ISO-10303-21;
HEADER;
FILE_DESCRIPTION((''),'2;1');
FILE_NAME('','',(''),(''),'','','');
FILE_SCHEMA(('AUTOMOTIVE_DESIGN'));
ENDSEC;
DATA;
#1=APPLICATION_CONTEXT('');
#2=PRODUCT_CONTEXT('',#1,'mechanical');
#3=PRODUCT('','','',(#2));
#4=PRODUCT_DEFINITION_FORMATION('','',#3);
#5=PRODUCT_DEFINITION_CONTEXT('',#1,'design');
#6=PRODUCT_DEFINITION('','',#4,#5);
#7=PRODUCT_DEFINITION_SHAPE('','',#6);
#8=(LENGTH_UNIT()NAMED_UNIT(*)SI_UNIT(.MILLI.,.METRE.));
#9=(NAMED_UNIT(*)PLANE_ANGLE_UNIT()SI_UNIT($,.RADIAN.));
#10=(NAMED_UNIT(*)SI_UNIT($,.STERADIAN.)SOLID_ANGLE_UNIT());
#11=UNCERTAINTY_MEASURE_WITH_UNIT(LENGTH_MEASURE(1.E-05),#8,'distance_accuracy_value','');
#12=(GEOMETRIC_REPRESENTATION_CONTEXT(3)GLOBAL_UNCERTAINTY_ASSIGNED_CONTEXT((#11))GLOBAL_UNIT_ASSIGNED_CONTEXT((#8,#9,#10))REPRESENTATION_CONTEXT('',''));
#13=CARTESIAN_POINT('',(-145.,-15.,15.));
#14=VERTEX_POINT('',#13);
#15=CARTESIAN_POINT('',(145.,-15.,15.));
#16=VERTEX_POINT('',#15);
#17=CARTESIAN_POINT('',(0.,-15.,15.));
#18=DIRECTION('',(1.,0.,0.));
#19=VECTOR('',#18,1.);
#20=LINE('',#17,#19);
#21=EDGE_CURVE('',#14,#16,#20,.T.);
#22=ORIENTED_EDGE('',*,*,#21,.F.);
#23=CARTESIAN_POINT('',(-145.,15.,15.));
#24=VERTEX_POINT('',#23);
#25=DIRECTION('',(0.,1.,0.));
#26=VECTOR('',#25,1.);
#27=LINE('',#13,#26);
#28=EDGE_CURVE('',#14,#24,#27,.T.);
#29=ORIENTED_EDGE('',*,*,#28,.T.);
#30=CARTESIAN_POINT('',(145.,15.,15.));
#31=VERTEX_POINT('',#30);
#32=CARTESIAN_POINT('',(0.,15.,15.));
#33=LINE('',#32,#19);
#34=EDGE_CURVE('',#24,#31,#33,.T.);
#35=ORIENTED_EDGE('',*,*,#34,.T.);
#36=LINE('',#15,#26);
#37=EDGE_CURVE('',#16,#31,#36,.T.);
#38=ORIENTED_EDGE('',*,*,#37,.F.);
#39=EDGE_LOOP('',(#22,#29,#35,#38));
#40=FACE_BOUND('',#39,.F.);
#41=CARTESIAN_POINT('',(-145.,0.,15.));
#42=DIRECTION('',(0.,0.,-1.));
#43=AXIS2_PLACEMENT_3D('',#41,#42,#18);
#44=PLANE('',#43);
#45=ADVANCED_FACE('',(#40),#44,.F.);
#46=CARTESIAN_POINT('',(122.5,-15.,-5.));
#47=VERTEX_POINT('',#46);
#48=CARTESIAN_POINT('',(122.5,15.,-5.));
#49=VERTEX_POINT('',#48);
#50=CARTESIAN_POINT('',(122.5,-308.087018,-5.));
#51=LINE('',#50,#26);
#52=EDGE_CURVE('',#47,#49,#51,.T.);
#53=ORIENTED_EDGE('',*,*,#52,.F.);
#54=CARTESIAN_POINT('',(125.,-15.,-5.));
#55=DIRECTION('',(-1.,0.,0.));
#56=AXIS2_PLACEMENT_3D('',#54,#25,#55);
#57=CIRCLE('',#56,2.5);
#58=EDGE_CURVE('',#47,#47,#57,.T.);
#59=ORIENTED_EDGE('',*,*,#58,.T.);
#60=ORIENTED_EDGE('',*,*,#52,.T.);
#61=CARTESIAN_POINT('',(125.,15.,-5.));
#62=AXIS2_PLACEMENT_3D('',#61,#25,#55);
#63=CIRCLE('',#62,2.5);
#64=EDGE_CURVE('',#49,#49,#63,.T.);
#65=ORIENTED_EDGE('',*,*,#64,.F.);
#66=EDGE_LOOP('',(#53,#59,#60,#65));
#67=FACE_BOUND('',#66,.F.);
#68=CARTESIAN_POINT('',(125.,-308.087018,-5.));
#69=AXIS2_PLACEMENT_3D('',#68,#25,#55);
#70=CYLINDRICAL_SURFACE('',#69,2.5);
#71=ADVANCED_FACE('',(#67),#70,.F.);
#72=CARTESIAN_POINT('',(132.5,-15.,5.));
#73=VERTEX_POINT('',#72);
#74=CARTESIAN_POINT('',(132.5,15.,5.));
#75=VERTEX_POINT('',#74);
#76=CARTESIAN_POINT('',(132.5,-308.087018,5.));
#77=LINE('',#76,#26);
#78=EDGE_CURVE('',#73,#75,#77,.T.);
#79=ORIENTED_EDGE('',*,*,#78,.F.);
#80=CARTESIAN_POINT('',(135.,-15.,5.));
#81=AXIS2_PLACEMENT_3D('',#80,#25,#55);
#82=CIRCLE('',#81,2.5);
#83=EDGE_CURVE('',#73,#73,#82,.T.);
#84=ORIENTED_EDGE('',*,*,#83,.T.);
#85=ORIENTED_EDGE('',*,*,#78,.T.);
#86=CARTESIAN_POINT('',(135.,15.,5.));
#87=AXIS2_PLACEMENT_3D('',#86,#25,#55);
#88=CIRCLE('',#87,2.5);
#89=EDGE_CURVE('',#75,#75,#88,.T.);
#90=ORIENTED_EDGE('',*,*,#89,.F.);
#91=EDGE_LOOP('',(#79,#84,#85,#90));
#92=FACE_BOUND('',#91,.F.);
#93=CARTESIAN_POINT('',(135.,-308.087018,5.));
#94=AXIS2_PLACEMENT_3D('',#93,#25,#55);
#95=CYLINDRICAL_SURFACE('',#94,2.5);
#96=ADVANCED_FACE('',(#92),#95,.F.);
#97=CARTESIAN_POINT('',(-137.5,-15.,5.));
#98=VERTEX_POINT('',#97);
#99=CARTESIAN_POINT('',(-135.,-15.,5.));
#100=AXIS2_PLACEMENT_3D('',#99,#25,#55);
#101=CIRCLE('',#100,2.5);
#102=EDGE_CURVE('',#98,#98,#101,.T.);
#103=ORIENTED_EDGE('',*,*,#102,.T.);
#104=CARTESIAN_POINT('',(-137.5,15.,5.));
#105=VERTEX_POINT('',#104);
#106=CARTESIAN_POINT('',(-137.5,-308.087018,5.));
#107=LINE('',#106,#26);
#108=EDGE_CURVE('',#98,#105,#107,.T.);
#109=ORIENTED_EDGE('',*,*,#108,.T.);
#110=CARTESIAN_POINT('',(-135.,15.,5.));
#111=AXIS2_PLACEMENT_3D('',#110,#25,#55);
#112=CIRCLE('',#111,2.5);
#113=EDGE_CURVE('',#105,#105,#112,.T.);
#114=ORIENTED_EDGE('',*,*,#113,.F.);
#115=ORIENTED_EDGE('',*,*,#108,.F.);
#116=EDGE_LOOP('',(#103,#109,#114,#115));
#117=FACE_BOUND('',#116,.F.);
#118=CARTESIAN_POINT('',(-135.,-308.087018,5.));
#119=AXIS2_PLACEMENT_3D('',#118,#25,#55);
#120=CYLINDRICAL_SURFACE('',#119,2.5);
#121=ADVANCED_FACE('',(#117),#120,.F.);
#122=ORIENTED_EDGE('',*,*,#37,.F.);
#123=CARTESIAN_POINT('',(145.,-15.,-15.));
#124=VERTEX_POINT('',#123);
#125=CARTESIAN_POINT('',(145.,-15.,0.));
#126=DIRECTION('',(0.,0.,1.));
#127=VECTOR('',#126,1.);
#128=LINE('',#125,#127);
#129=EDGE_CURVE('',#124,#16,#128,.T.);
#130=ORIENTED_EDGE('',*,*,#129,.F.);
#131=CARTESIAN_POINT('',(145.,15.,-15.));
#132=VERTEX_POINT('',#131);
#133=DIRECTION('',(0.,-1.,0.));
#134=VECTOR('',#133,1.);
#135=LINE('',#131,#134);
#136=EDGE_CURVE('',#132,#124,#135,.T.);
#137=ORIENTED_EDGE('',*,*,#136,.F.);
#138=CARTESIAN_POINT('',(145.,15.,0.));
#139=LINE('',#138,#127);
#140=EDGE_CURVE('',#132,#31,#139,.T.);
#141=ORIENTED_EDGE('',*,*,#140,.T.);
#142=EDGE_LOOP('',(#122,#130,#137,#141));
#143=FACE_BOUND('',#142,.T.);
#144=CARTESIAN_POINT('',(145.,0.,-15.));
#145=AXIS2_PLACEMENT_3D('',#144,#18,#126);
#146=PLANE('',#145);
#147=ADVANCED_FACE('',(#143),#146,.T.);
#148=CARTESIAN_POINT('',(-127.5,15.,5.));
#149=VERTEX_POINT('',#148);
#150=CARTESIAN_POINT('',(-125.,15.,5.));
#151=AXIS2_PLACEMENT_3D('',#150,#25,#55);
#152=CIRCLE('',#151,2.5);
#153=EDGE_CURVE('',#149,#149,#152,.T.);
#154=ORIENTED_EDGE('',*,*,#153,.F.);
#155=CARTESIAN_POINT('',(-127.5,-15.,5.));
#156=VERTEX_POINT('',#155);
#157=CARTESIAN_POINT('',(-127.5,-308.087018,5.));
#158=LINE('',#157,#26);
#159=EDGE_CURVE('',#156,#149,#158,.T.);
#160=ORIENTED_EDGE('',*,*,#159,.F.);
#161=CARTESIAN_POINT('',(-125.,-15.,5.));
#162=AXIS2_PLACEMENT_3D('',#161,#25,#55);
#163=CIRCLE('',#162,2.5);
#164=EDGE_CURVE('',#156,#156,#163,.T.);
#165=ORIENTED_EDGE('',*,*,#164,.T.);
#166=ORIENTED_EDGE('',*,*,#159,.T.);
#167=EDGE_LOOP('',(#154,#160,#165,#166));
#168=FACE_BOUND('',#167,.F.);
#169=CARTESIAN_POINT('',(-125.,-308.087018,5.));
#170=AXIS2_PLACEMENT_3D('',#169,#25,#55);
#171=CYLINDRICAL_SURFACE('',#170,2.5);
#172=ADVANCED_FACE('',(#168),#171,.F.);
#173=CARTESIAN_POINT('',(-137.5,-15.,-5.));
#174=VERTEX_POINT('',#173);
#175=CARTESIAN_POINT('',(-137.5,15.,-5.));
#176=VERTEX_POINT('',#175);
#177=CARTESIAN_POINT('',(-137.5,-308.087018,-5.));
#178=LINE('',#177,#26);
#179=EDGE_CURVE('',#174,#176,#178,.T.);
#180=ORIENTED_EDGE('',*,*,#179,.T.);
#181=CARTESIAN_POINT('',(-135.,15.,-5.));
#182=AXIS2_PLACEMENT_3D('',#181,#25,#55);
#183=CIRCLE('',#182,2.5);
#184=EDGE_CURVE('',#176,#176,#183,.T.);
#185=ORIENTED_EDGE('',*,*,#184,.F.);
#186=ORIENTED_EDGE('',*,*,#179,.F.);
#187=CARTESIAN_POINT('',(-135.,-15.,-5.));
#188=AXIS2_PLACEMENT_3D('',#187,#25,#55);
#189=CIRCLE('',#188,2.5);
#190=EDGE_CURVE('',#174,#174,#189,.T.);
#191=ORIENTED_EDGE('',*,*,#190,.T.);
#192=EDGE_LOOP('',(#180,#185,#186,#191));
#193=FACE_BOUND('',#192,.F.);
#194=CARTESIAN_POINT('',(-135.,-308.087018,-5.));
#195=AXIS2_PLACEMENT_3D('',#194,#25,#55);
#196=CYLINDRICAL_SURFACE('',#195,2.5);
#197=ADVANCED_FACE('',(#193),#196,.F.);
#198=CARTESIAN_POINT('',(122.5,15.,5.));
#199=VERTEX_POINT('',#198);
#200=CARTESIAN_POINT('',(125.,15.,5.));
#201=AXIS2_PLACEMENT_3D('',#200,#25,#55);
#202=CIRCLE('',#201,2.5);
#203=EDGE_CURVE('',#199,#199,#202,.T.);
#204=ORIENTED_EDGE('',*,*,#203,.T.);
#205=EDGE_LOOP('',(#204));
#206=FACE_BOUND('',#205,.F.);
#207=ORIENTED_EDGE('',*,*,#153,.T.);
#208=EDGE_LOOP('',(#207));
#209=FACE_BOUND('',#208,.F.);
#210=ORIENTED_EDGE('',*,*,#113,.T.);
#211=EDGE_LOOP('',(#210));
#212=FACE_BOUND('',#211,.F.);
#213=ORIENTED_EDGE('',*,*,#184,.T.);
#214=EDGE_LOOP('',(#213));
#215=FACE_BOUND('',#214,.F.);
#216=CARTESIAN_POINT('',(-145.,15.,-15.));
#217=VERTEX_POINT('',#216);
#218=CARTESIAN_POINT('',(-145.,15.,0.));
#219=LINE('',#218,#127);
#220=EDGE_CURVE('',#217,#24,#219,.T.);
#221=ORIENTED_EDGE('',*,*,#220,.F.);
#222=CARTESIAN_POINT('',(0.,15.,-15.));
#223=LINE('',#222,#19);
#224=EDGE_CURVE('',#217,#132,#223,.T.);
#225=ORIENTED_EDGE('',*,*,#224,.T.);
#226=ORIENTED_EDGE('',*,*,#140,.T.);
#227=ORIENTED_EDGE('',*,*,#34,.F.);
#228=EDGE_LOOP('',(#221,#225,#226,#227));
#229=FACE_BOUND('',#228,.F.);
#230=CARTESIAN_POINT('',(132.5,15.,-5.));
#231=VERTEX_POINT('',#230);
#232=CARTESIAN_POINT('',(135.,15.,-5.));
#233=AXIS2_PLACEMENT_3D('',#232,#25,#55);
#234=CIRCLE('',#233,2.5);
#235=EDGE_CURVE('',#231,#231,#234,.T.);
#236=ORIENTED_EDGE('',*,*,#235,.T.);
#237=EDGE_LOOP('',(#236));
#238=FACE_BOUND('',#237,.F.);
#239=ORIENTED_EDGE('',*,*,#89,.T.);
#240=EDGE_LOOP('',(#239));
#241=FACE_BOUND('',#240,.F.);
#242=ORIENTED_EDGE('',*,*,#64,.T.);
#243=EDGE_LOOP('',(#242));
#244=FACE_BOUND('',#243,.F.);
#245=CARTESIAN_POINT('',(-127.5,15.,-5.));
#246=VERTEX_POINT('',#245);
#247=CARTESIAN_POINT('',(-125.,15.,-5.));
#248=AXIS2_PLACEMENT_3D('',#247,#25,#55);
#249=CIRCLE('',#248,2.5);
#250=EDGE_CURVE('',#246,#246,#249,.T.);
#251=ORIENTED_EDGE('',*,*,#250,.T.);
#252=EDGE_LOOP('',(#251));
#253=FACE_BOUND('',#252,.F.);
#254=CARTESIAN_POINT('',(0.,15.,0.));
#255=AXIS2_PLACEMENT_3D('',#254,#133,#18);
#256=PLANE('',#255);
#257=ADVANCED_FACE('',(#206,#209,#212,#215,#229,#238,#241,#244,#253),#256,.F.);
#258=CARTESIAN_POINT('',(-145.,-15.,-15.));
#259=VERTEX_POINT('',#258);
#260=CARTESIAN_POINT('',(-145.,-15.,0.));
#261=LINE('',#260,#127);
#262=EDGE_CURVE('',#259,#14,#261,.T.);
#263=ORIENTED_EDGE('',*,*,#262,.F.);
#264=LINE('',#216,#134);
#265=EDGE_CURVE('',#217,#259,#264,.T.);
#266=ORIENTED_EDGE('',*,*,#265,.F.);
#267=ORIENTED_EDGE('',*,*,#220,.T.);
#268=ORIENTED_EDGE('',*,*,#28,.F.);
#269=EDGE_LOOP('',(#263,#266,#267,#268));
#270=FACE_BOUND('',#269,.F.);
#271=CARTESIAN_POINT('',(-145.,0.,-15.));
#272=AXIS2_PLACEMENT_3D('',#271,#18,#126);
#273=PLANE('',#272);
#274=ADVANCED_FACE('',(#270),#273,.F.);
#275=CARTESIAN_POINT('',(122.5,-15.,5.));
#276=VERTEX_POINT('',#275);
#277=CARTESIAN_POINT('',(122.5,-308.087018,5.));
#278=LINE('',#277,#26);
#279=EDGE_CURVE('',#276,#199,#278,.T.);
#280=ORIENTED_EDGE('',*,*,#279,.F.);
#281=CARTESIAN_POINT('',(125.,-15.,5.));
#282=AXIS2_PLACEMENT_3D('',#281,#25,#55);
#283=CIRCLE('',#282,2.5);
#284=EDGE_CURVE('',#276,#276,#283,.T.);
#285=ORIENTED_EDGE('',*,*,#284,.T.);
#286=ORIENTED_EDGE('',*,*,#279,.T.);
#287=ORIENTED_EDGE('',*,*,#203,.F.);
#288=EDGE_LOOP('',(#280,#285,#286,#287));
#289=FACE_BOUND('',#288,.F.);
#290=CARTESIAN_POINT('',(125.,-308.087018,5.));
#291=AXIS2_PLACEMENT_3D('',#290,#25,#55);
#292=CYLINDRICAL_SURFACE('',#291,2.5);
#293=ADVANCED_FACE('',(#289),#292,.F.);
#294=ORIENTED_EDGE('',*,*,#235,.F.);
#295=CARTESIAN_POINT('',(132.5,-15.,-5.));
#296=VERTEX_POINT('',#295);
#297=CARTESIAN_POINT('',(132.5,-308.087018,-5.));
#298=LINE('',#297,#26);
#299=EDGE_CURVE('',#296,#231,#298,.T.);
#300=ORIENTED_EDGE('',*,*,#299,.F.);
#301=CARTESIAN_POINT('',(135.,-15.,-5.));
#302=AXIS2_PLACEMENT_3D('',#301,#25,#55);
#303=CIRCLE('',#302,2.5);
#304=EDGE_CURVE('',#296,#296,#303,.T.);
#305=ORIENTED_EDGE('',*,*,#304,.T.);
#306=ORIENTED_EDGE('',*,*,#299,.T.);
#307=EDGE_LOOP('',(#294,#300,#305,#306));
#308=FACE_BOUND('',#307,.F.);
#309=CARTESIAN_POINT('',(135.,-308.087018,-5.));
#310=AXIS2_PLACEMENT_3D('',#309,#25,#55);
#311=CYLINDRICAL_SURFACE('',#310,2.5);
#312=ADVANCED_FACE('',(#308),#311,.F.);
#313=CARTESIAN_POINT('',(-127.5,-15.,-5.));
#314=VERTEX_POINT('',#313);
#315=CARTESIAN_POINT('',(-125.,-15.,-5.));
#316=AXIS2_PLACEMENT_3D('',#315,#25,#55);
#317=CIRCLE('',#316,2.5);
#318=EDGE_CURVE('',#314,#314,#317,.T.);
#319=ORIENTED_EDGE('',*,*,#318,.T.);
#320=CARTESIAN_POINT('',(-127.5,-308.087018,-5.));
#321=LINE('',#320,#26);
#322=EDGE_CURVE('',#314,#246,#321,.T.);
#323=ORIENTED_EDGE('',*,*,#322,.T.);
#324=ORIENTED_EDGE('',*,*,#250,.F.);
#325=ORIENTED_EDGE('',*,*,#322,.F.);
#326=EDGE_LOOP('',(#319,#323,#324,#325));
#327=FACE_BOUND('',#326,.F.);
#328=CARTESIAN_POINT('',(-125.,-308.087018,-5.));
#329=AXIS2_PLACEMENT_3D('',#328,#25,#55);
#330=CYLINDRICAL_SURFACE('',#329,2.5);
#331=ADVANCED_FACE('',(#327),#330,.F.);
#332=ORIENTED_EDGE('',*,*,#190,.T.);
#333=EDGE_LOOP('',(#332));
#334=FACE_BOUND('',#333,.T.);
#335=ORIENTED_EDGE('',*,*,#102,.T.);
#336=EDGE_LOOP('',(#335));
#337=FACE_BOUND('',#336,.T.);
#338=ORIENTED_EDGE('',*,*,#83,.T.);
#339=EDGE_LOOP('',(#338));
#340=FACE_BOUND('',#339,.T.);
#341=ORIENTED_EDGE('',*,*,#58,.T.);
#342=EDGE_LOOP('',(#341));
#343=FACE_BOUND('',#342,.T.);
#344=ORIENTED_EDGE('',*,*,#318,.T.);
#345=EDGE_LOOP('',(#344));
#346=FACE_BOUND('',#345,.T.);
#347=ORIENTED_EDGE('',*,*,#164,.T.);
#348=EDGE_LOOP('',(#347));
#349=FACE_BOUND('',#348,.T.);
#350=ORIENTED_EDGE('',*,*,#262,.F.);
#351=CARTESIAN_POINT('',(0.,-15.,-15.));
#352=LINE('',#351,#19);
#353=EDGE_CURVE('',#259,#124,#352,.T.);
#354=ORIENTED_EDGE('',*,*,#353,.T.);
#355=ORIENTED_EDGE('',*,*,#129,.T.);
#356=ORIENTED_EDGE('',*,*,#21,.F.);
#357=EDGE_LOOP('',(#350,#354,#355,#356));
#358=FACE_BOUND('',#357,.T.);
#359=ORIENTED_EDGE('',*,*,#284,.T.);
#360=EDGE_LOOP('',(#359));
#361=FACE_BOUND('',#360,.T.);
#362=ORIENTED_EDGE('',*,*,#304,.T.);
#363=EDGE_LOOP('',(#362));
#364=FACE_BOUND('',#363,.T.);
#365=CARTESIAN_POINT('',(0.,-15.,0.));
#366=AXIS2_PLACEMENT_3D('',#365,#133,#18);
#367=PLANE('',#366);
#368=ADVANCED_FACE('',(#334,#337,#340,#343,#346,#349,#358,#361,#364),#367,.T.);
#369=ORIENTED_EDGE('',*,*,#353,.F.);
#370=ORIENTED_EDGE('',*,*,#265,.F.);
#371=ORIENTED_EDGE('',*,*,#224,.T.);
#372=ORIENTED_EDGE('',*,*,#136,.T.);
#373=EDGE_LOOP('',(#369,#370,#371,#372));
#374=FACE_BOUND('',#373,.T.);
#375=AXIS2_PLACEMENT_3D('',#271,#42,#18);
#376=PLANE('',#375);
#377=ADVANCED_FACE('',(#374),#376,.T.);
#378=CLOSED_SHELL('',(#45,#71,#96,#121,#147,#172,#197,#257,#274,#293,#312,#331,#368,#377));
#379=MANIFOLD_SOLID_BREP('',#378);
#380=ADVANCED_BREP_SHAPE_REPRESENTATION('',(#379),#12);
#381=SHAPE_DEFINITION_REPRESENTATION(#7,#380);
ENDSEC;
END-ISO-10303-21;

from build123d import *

# Parameters (mm, degrees)
F0_W     = 290
F0_H     = 30
F1_DEPTH = 15
F3_D     = 5


# Not quite as in the source:
# - a feature names something its author has since deleted; it is built from what else it names


with BuildPart() as f1:
    # F0 (on Front) → F1 (new body, symmetric)
    with BuildSketch(Plane.XZ):
        Rectangle(F0_W, F0_H)
    extrude(amount=F1_DEPTH, both=True)

    # F3 (through all)
    with Locations(Plane.XZ.offset(15)):
        with Locations((-135, 5), (-135, -5), (-125, 5), (-125, -5), (125, 5), (125, -5), (135, 5), (135, -5)):
            Hole(F3_D / 2)


solid = f1.part
